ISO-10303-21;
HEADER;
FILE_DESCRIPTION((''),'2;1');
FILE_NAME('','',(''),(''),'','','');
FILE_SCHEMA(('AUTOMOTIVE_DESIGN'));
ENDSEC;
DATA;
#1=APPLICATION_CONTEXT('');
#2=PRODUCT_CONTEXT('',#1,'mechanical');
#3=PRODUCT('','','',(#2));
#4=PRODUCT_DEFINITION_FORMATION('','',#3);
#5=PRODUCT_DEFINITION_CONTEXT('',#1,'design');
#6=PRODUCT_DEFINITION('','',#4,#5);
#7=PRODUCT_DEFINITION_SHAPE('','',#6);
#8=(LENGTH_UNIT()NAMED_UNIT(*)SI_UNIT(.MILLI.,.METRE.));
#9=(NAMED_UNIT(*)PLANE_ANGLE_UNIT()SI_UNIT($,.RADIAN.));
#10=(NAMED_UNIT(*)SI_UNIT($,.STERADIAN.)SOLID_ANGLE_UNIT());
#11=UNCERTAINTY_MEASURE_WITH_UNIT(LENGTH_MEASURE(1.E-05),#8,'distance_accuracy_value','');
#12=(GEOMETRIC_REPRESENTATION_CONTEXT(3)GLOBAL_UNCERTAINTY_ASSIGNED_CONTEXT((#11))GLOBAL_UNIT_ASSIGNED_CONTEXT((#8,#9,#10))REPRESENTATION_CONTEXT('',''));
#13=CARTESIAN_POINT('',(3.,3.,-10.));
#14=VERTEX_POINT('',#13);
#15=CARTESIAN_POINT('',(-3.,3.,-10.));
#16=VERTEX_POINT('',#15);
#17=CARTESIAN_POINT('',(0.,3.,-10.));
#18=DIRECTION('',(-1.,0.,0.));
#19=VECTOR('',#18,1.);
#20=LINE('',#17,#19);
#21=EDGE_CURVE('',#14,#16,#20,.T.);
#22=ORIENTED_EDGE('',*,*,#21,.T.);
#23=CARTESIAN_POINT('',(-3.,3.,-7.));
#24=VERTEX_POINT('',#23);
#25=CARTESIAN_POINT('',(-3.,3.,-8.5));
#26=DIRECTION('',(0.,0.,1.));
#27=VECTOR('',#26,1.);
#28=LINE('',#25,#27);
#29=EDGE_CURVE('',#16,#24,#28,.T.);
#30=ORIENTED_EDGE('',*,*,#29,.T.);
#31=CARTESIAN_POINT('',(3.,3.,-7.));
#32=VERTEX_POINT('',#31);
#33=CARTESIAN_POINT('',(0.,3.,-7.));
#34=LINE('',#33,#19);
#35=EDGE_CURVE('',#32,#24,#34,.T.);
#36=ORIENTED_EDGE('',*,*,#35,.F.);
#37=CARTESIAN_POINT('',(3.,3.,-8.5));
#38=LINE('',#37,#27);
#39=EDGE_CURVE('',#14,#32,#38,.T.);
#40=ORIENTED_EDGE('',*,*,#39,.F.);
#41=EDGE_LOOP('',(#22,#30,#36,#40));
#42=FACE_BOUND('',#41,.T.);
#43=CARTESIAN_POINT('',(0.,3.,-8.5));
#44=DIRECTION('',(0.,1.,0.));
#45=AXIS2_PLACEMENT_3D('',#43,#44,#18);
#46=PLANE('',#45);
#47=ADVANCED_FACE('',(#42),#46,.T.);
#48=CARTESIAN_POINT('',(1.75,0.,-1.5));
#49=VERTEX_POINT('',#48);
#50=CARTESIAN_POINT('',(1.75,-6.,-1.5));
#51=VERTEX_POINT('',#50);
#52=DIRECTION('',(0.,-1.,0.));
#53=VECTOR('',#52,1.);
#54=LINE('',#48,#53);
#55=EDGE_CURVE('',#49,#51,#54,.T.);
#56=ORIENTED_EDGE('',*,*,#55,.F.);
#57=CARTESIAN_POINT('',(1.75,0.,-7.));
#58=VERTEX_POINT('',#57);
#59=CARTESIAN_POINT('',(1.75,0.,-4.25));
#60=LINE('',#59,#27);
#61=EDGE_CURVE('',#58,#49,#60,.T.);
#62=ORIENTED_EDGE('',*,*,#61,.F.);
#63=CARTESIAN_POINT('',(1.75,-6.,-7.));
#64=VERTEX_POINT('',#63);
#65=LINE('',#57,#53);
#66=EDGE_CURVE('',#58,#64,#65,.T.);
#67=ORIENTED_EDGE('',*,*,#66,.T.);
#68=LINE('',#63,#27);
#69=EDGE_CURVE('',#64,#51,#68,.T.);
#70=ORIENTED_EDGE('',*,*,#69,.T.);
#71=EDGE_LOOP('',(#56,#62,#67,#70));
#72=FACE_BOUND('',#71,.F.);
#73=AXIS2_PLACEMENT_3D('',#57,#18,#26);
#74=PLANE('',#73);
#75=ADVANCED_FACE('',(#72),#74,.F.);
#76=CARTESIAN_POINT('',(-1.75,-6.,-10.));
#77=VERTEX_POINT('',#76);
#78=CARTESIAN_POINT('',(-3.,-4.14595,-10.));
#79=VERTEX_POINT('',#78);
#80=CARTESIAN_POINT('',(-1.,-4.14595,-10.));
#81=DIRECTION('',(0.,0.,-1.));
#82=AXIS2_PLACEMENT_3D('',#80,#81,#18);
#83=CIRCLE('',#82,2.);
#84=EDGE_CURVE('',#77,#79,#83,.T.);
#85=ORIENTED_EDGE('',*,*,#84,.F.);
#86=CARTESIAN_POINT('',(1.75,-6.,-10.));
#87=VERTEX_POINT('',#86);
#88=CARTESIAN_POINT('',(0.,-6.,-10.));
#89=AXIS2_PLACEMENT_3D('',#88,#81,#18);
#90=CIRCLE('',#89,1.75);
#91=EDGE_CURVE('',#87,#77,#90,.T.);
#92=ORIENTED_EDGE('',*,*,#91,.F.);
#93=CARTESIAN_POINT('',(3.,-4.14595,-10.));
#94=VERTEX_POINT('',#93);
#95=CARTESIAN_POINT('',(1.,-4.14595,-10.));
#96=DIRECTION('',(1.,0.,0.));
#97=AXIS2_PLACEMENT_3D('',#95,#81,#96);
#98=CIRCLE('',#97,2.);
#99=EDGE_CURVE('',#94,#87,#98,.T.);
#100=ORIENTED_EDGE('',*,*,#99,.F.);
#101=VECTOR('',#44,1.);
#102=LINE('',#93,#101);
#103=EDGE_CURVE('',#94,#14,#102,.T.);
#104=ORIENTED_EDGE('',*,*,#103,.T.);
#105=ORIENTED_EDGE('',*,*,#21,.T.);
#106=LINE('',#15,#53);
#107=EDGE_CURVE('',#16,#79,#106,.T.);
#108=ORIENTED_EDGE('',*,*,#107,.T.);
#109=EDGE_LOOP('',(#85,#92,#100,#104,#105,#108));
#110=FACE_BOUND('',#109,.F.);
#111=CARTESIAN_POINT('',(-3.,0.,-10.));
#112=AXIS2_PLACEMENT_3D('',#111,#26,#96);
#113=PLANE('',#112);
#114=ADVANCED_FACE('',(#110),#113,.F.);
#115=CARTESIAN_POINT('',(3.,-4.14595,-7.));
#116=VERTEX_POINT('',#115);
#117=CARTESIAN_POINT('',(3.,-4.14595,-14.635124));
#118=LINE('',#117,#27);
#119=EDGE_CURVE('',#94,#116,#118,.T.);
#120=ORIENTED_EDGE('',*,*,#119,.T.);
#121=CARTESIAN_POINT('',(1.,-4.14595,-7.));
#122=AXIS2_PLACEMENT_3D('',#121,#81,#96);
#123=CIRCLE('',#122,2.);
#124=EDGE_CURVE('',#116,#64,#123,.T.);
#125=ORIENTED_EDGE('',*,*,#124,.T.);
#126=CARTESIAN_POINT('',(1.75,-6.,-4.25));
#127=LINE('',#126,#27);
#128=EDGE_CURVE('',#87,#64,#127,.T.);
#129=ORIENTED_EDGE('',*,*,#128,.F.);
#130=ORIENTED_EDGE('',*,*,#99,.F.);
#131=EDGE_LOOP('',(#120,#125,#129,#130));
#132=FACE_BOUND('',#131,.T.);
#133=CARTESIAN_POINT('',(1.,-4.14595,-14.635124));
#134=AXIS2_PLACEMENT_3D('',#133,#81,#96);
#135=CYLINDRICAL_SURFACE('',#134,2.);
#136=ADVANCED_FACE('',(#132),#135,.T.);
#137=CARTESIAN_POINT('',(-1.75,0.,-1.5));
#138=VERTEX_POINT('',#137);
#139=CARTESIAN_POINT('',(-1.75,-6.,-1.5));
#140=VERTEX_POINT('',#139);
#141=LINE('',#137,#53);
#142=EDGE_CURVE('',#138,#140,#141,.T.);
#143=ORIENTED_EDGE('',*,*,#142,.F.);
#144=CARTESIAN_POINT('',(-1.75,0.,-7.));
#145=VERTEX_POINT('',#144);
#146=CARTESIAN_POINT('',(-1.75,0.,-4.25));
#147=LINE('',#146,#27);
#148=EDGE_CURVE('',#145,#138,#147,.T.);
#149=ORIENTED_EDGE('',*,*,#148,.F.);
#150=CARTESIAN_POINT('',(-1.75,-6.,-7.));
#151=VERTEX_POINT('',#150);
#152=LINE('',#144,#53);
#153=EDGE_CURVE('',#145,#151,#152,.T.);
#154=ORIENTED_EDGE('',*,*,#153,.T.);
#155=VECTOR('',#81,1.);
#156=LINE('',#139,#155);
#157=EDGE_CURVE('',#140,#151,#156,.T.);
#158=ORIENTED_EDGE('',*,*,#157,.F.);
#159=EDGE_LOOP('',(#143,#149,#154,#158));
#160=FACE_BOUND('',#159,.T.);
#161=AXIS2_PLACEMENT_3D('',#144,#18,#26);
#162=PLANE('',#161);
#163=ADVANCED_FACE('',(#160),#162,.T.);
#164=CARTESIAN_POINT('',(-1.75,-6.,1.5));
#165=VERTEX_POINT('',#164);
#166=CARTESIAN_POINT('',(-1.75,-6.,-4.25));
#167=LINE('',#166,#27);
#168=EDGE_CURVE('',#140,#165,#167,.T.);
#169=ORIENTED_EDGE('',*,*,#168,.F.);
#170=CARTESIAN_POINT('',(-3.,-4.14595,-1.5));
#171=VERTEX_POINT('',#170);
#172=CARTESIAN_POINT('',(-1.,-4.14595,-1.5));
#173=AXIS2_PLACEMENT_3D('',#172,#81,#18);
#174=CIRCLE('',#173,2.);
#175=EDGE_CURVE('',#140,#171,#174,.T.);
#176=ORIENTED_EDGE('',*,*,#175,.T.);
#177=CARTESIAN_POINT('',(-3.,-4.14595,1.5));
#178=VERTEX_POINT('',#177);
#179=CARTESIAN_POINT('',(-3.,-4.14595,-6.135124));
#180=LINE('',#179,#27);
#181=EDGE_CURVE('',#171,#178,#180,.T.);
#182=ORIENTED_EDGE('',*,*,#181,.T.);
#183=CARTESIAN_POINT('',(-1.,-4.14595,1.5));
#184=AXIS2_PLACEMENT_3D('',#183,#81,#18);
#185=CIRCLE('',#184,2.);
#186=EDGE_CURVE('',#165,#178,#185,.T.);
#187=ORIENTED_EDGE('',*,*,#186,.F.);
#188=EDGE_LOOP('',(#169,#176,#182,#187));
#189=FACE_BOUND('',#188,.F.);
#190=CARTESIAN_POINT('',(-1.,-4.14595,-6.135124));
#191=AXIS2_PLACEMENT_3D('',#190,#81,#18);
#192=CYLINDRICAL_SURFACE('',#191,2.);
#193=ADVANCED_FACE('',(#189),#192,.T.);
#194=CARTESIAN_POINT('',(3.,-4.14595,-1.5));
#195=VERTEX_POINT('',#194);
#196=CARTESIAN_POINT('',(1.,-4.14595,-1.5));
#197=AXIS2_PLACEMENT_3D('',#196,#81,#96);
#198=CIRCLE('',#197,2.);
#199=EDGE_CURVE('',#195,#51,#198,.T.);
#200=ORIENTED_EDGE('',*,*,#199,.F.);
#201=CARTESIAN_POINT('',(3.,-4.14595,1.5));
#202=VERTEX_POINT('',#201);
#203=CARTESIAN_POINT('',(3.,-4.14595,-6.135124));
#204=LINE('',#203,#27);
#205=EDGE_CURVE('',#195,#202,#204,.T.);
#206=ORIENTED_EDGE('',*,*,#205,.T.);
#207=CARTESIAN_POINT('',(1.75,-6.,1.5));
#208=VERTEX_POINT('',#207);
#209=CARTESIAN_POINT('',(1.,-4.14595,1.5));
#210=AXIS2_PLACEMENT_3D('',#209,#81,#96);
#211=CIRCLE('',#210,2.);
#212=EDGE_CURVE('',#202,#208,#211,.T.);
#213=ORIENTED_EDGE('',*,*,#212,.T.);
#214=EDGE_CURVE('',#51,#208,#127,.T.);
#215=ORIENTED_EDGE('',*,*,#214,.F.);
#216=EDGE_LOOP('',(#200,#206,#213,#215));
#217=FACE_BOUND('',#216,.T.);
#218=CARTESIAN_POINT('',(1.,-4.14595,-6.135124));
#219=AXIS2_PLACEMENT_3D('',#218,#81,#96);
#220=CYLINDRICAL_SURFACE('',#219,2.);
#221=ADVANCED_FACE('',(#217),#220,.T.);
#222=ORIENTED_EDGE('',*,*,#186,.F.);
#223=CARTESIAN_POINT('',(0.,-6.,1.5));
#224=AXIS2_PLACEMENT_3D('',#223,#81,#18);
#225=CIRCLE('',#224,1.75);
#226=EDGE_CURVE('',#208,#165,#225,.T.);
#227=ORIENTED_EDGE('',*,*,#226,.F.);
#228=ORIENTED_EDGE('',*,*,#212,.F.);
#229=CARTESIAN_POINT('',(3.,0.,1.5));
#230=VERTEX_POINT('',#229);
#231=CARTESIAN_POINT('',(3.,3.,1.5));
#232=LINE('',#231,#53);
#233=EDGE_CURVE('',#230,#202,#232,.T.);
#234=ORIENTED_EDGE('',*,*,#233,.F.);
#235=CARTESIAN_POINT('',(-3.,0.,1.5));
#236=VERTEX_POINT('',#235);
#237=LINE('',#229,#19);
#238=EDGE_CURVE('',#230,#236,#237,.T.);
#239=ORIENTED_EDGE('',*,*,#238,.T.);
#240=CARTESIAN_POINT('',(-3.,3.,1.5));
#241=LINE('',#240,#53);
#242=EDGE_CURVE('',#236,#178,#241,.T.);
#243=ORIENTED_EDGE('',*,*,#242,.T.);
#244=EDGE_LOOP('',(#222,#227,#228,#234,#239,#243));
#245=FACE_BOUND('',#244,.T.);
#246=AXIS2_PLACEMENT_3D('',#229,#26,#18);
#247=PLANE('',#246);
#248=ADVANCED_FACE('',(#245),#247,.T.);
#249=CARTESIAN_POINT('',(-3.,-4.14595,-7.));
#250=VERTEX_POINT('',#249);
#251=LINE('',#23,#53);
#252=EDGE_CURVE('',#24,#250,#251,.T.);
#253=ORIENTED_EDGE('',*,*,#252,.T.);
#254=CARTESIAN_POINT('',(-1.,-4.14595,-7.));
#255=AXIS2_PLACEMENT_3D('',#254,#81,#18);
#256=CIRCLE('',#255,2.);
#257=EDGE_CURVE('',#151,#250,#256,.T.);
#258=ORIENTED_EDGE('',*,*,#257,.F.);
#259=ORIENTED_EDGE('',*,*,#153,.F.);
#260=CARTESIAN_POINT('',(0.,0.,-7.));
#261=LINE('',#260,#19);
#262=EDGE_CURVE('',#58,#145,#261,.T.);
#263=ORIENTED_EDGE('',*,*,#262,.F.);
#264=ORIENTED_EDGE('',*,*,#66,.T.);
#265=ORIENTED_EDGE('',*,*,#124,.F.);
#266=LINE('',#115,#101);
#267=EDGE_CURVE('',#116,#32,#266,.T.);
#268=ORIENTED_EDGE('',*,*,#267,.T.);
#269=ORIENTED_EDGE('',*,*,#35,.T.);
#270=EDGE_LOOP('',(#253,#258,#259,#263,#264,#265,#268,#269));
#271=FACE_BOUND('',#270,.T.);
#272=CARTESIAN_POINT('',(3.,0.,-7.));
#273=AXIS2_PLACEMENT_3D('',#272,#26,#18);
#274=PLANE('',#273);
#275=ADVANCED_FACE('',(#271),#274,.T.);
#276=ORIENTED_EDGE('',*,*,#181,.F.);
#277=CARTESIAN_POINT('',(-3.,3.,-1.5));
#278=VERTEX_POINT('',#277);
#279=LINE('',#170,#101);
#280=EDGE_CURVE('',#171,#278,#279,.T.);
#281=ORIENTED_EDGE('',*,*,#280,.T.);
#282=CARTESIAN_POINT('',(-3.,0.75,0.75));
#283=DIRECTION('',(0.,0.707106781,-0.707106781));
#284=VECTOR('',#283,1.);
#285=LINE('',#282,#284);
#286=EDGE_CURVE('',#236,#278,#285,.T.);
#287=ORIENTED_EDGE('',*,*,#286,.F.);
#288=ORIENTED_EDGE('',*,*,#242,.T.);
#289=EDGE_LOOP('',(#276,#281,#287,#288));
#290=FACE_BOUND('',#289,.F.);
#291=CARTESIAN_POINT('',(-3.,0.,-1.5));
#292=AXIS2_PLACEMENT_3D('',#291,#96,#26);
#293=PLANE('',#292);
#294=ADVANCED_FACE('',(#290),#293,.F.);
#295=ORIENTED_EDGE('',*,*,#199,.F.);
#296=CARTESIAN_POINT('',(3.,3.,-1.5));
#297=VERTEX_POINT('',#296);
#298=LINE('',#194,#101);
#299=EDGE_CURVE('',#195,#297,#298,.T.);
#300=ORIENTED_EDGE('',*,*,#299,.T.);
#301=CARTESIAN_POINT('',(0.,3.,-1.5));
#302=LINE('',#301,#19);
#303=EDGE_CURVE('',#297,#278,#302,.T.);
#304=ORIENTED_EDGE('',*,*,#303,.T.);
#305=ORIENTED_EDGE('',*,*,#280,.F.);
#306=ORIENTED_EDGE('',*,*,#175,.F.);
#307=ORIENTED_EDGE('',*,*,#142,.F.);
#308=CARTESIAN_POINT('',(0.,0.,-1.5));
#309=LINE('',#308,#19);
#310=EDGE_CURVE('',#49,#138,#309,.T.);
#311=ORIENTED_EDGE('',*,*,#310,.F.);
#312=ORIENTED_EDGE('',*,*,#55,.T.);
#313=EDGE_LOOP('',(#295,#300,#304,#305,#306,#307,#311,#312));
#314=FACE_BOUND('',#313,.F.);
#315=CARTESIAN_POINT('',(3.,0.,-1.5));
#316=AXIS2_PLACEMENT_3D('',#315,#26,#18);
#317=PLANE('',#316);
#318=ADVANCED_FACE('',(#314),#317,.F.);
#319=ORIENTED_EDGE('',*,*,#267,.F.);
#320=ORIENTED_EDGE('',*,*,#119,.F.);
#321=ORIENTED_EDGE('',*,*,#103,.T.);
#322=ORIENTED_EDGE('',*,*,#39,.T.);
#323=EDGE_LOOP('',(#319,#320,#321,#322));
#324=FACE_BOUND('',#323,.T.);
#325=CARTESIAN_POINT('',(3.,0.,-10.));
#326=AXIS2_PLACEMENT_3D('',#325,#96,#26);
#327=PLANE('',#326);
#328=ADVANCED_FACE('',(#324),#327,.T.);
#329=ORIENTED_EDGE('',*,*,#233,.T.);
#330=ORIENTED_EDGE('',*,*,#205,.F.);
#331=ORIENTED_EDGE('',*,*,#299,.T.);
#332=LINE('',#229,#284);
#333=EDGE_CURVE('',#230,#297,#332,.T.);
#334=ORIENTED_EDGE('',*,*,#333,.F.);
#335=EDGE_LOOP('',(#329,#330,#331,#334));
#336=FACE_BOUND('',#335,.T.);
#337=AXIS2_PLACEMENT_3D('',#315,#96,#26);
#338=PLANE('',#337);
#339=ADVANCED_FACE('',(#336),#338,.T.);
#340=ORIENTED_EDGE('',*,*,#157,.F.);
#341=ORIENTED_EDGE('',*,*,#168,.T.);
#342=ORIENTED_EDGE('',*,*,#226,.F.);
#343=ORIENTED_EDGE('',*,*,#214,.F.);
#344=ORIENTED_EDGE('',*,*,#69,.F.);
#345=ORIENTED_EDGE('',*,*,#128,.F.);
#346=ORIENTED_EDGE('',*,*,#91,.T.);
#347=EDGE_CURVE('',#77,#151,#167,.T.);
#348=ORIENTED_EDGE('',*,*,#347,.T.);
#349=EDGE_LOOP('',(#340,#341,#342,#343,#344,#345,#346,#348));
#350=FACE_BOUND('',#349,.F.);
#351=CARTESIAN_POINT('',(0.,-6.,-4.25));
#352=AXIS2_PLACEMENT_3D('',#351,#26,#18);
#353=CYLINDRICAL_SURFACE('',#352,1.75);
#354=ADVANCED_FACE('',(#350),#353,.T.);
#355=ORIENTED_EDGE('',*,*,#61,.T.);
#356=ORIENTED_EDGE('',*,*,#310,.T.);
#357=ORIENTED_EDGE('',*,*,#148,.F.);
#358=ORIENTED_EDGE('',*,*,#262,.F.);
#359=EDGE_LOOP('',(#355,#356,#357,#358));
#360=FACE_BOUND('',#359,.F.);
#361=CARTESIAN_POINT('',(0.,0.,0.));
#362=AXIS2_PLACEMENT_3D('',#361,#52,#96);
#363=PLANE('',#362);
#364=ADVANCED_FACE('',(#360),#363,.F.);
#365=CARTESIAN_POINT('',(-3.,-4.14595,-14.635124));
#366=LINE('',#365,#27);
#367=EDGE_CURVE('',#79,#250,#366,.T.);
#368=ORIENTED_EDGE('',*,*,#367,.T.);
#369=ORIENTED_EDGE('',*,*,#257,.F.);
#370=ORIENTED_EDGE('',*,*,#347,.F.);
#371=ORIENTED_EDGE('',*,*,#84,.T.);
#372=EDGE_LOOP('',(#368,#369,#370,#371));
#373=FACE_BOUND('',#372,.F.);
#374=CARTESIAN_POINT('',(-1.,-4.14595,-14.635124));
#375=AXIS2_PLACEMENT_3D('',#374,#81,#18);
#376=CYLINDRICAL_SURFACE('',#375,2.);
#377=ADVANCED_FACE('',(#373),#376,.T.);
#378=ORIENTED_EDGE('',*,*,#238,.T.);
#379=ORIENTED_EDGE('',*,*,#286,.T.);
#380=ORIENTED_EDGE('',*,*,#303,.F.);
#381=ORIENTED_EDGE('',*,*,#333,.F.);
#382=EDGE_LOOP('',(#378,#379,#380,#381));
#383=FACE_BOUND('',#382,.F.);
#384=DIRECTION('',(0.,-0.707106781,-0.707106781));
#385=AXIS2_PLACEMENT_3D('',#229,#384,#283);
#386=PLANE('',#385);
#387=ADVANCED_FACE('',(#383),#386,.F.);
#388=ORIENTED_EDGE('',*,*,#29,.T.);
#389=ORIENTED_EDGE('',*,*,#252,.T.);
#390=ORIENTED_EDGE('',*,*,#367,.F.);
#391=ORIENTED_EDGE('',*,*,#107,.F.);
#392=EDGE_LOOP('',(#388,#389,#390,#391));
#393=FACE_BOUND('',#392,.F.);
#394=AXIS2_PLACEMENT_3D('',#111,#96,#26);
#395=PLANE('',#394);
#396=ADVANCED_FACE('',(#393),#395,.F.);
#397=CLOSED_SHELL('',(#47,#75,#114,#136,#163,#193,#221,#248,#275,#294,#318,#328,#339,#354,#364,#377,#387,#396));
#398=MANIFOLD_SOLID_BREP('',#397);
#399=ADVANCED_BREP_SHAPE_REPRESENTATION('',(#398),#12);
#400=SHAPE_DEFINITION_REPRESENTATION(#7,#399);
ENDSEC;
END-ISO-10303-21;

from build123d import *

# Parameters (mm, degrees)
F0_W        = 3.5
F0_H        = 5.5
F1_DEPTH    = 6
F2_W        = 1.75
F2_H        = 11.5
F4_T1_DEPTH = 12.2702481089
F4_T3_DEPTH = 12.2702481089
F5_W        = 6
F5_H        = 3
F6_DEPTH    = 3
F8_DEPTH    = 25


# Not quite as in the source:
# - a fillet or chamfer that OpenCascade refuses, or shapes differently, is made with other operations: its cross-section is extruded or revolved along the edge and cut away or added


with BuildPart() as f1:
    # F0 (on Front) → F1 (new body)
    with BuildSketch(Plane.XZ):
        Polygon((1.75, -1.5), (3, -1.5), (3, 1.5), (-3, 1.5), (-3, -1.5), (-1.75, -1.5), align=None)
        with Locations((0, -4.25)):
            Rectangle(F0_W, F0_H)
        Polygon((3, -7), (1.75, -7), (-1.75, -7), (-3, -7), (-3, -10), (3, -10), align=None)
    extrude(amount=F1_DEPTH)

    # F2 (on face) → F3 (revolve)
    with BuildSketch(Plane.XZ.offset(6)):
        with Locations((-0.875, -4.25)):
            Rectangle(F2_W, F2_H)
    revolve(axis=Axis((0, -6, -4.25), (0, 0, -1)))

    # F4: fillet of radius 2 on 4 edges, made by hand

    # F4_s2 → F4_t1 (cut)
    with BuildSketch(Plane.XY.offset(-6.1351240544)):
        with BuildLine():
            ThreePointArc((3, -4.1459503782), (2.6583123952, -5.263984367), (1.75, -6))
            Line((1.75, -6), (3, -6))
            Line((3, -6), (3, -4.1459503782))
        make_face()
        with BuildLine():
            ThreePointArc((-3, -4.1459503782), (-2.6583123952, -5.263984367), (-1.75, -6))
            Line((-1.75, -6), (-3, -6))
            Line((-3, -6), (-3, -4.1459503782))
        make_face()
    extrude(amount=F4_T1_DEPTH, mode=Mode.SUBTRACT)

    # F4_s4 → F4_t3 (cut)
    with BuildSketch(Plane.XY.offset(-14.6351240544)):
        with BuildLine():
            ThreePointArc((3, -4.1459503782), (2.6583123952, -5.263984367), (1.75, -6))
            Line((1.75, -6), (3, -6))
            Line((3, -6), (3, -4.1459503782))
        make_face()
        with BuildLine():
            ThreePointArc((-3, -4.1459503782), (-2.6583123952, -5.263984367), (-1.75, -6))
            Line((-1.75, -6), (-3, -6))
            Line((-3, -6), (-3, -4.1459503782))
        make_face()
    extrude(amount=F4_T3_DEPTH, mode=Mode.SUBTRACT)

    # F5 (on face) → F6 (join)
    with BuildSketch(Plane(origin=(0, 0, 0), x_dir=(-1, 0, 0), z_dir=(0, 1, 0))):
        Rectangle(F5_W, F5_H)
        with Locations((0, -8.5)):
            Rectangle(F5_W, F5_H)
    extrude(amount=F6_DEPTH)

    # F7 (on face) → F8 (cut)
    with BuildSketch(Plane.YZ.offset(3)):
        Polygon((0, 1.5), (3, -1.5), (3, 1.5), align=None)
    extrude(amount=-F8_DEPTH, mode=Mode.SUBTRACT)


solid = f1.part
